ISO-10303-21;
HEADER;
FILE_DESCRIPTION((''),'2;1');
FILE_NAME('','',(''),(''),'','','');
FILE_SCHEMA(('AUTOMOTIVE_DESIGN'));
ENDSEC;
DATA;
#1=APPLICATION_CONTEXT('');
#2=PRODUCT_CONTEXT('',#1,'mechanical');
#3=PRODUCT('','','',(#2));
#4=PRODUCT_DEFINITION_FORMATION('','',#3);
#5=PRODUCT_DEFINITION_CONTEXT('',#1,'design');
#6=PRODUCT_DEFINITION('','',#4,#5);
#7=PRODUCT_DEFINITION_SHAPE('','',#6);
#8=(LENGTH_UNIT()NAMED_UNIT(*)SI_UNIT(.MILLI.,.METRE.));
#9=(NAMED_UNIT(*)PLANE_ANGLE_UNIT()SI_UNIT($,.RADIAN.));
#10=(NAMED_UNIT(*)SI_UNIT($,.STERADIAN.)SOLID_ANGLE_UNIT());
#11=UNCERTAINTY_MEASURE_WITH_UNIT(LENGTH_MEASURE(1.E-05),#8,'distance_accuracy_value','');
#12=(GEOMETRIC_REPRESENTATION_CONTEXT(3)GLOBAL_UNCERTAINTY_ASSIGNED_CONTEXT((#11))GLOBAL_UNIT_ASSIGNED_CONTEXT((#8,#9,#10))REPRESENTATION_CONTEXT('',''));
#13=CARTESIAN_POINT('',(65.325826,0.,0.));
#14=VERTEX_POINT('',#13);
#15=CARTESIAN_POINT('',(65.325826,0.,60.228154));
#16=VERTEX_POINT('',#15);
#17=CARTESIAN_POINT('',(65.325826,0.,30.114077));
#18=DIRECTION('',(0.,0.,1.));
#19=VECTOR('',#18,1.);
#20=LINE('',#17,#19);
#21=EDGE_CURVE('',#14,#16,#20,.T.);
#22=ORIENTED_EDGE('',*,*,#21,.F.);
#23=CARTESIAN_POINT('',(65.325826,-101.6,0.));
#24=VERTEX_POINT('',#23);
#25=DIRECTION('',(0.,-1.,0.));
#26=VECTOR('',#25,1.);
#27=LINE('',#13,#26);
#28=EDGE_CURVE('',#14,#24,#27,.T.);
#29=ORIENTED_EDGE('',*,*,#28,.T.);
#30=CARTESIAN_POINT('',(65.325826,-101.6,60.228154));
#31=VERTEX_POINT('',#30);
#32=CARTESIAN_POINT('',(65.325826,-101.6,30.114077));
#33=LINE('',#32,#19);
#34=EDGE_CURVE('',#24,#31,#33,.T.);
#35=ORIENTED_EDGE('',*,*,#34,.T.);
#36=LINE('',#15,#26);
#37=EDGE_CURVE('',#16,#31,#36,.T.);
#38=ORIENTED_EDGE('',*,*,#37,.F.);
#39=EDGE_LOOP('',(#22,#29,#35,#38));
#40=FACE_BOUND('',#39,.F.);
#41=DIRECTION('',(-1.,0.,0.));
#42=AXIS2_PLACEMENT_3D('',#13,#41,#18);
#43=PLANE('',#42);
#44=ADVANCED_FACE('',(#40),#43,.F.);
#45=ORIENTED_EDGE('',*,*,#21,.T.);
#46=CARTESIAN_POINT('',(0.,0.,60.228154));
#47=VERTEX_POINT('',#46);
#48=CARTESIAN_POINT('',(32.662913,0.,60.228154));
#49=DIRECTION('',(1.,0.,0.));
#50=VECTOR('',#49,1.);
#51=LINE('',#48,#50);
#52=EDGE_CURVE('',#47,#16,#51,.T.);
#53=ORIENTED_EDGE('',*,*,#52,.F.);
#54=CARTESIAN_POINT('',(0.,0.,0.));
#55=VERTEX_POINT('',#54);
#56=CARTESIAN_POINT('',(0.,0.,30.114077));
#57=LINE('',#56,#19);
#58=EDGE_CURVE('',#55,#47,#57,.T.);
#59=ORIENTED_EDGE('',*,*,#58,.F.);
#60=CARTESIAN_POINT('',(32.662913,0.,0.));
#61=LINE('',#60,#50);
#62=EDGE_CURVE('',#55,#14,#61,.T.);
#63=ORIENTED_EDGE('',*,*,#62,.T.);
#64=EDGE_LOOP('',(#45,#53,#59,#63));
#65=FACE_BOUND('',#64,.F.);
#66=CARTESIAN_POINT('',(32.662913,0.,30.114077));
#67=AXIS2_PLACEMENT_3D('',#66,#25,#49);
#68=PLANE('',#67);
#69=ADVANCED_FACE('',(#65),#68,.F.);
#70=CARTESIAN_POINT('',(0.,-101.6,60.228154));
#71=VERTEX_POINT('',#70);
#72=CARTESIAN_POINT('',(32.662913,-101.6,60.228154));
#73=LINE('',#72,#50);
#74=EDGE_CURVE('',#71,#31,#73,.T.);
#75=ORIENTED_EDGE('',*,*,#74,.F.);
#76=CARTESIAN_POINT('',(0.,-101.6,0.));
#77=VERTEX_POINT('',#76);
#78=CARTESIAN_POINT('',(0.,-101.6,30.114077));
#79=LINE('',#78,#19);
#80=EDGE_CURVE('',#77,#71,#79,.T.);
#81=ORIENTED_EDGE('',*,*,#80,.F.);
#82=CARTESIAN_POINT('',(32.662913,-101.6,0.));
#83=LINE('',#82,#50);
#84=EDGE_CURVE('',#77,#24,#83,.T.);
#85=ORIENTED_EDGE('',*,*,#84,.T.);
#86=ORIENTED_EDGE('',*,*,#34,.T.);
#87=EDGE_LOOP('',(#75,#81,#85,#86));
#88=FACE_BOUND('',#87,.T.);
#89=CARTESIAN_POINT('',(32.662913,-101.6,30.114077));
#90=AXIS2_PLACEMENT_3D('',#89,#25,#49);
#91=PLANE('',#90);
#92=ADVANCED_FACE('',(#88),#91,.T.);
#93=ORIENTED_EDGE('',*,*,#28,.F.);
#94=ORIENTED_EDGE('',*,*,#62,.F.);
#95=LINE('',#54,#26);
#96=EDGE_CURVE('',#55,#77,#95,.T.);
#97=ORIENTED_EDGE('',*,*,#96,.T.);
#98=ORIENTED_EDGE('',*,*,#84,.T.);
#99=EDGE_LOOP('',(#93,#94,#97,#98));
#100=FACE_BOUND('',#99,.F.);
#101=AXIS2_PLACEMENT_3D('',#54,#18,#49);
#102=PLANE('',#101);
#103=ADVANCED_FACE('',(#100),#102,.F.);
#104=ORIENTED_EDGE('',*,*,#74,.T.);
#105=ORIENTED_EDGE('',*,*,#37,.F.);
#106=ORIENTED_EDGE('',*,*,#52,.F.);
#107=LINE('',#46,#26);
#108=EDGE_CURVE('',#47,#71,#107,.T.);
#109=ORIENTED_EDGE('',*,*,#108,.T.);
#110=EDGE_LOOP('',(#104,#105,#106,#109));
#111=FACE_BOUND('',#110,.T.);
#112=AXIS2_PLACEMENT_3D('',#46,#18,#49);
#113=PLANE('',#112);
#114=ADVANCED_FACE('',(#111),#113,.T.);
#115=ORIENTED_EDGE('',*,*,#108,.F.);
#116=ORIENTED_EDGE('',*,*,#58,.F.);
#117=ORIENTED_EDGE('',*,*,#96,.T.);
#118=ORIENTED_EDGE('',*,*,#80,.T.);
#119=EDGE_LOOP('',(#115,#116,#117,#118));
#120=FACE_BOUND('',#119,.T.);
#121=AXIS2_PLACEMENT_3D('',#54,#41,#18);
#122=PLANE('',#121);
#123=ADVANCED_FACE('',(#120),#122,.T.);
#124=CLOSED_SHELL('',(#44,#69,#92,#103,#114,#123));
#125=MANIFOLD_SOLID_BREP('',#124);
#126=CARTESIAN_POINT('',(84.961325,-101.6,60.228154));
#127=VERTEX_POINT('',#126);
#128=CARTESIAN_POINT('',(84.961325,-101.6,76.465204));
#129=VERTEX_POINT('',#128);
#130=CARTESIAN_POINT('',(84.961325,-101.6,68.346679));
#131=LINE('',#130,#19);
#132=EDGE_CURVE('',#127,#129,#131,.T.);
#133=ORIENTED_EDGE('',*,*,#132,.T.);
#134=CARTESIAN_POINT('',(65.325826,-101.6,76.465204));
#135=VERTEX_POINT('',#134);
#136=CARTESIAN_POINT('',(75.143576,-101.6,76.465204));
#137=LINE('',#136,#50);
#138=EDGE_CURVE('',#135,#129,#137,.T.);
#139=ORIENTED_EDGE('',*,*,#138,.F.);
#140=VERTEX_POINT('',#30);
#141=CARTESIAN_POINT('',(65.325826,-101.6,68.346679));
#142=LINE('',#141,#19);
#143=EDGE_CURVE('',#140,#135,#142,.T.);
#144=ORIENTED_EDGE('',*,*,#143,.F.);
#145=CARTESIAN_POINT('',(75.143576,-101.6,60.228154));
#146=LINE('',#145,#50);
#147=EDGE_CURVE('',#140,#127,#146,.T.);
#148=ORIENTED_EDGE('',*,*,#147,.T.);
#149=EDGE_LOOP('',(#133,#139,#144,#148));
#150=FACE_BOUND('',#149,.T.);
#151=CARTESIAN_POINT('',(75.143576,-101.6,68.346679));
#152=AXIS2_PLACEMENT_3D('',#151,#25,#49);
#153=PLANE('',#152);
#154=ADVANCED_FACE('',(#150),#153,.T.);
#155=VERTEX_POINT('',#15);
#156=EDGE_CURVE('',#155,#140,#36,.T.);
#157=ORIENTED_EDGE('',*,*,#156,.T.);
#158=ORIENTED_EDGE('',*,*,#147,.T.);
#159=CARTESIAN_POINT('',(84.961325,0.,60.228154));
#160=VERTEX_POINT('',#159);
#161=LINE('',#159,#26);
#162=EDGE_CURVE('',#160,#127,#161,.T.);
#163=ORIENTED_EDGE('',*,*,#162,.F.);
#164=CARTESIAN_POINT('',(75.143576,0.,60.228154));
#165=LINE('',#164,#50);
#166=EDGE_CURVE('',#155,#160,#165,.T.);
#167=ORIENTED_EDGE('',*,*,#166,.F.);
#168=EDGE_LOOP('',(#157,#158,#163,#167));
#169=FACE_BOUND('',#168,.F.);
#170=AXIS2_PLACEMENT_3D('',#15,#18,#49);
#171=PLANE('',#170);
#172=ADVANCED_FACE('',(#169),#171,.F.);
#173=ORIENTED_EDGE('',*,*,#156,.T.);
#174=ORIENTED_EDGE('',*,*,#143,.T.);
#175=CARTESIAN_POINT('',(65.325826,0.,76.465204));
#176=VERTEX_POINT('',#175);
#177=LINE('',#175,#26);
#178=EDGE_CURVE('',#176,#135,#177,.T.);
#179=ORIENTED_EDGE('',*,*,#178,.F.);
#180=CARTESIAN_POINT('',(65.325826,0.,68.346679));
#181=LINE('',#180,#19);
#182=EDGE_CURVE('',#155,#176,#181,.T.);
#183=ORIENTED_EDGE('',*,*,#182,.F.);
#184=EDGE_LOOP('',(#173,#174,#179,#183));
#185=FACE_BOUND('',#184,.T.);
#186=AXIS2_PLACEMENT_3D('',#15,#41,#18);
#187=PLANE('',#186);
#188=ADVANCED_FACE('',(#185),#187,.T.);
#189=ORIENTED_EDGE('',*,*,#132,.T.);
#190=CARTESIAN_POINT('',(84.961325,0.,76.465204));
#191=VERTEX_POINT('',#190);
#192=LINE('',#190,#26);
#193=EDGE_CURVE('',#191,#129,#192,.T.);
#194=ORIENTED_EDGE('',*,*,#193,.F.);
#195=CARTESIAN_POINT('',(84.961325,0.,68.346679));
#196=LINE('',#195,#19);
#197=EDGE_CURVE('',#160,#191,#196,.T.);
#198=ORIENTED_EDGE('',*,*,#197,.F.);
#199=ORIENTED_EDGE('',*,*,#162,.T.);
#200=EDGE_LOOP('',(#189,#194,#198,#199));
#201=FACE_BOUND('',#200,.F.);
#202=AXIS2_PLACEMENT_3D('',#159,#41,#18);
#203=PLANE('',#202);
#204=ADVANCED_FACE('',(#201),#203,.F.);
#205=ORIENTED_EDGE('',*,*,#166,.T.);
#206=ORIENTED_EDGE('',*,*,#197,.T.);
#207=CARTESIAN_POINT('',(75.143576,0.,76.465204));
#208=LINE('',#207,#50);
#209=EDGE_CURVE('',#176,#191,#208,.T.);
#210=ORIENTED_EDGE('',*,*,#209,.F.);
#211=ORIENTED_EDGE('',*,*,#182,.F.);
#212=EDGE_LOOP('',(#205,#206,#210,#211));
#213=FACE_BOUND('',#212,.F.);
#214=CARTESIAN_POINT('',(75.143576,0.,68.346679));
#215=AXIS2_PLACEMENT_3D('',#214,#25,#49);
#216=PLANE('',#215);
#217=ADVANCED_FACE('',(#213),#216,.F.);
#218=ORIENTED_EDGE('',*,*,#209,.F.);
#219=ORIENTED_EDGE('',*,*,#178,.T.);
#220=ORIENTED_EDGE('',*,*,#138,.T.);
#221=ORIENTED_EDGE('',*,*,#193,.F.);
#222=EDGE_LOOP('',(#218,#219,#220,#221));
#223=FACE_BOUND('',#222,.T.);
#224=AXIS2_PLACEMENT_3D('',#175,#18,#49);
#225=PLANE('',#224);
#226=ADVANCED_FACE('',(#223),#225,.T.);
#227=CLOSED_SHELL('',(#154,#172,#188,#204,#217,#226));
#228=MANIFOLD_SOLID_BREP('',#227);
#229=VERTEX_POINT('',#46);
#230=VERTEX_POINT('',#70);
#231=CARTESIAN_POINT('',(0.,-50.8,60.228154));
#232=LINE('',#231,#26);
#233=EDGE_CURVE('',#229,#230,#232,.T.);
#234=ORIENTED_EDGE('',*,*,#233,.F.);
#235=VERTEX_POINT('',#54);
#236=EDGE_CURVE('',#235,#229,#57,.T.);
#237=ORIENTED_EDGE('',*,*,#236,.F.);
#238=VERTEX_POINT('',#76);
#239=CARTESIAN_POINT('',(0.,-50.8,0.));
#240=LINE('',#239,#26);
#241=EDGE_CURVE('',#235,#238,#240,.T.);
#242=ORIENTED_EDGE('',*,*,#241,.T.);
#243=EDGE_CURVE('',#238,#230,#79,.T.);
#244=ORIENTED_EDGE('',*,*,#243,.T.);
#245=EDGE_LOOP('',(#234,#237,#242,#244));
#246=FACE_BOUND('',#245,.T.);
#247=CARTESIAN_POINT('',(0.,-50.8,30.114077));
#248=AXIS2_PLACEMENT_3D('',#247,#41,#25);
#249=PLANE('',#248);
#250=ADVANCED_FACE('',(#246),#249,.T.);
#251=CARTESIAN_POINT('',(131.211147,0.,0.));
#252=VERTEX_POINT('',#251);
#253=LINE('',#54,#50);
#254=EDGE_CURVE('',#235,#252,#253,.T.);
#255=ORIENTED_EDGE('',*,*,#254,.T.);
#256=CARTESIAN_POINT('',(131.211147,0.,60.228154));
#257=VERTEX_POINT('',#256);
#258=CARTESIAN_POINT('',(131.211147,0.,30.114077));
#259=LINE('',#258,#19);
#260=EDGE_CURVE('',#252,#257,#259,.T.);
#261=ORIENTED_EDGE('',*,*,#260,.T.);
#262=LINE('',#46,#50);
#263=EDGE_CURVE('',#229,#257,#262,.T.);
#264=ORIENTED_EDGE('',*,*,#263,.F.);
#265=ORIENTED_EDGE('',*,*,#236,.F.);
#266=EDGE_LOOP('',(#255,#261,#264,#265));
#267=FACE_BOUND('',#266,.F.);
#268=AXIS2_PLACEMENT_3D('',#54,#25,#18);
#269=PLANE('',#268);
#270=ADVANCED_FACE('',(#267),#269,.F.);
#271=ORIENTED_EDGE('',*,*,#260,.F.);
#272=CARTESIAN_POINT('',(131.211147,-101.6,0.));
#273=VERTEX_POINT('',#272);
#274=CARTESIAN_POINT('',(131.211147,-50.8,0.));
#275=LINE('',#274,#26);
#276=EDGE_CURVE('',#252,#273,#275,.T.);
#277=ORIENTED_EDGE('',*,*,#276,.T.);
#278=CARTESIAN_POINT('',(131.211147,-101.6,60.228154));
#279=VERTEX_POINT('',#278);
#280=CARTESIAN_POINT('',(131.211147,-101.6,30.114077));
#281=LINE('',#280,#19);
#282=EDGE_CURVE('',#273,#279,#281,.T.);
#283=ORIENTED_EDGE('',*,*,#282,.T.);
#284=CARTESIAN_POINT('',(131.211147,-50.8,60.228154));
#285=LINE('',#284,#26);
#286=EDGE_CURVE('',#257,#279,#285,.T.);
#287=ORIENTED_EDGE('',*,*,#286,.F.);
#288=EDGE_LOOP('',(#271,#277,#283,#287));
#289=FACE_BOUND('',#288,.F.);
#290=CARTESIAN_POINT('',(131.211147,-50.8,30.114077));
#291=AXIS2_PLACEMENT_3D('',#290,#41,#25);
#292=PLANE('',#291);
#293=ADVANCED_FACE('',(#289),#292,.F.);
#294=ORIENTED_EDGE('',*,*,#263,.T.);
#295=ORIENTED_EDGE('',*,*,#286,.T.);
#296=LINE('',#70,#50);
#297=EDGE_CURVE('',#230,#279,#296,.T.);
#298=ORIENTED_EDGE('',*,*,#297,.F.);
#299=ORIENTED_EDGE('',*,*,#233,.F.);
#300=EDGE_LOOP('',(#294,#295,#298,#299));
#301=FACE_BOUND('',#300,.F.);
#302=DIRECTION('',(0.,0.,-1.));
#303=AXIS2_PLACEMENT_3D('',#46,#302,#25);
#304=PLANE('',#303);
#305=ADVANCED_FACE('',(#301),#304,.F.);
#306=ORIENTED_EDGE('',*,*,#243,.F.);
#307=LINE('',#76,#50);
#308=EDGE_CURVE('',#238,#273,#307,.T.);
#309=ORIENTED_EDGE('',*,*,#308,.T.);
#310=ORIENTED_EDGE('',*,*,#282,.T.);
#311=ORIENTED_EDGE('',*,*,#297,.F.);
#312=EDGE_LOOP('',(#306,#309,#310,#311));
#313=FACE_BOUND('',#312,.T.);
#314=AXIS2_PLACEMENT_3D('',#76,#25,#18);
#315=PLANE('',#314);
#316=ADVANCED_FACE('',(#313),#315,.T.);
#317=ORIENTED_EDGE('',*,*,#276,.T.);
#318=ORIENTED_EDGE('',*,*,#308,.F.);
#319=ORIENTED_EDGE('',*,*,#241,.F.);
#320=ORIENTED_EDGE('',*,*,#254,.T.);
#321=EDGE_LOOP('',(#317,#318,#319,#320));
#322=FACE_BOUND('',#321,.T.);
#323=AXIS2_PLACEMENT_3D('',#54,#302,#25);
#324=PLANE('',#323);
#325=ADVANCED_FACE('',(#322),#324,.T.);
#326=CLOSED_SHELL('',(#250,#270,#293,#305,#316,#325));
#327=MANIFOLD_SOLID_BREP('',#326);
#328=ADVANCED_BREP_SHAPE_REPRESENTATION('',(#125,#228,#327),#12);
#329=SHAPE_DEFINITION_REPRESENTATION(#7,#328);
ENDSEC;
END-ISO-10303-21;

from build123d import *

# Parameters (mm, degrees)
F0_W     = 65.3258264065
F0_H     = 60.2281540632
F1_DEPTH = 101.6
F0_W_2   = 19.6354985237
F0_H_2   = 16.2370502949
F2_W     = 101.6
F2_H     = 60.2281540632
F3_DEPTH = 131.2111467123


with BuildPart() as f1:
    # F0 (on Front) → F1 (new body)
    with BuildSketch(Plane.XZ):
        with Locations((32.6629132032, 30.1140770316)):
            Rectangle(F0_W, F0_H)
    extrude(amount=F1_DEPTH)


with BuildPart() as f1b:
    # F0 (on Front) → F1, piece 2 (new body)
    with BuildSketch(Plane.XZ):
        with Locations((75.1435756683, 68.3466792107)):
            Rectangle(F0_W_2, F0_H_2)
    extrude(amount=F1_DEPTH)


with BuildPart() as f3:
    # F2 (on face) → F3 (new body)
    with BuildSketch(Plane(origin=(0, 0, 0), x_dir=(0, -1, 0), z_dir=(-1, 0, 0))):
        with Locations((50.8, 30.1140770316)):
            Rectangle(F2_W, F2_H)
    extrude(amount=-F3_DEPTH)


solid = Compound([f1.part, f1b.part, f3.part])
